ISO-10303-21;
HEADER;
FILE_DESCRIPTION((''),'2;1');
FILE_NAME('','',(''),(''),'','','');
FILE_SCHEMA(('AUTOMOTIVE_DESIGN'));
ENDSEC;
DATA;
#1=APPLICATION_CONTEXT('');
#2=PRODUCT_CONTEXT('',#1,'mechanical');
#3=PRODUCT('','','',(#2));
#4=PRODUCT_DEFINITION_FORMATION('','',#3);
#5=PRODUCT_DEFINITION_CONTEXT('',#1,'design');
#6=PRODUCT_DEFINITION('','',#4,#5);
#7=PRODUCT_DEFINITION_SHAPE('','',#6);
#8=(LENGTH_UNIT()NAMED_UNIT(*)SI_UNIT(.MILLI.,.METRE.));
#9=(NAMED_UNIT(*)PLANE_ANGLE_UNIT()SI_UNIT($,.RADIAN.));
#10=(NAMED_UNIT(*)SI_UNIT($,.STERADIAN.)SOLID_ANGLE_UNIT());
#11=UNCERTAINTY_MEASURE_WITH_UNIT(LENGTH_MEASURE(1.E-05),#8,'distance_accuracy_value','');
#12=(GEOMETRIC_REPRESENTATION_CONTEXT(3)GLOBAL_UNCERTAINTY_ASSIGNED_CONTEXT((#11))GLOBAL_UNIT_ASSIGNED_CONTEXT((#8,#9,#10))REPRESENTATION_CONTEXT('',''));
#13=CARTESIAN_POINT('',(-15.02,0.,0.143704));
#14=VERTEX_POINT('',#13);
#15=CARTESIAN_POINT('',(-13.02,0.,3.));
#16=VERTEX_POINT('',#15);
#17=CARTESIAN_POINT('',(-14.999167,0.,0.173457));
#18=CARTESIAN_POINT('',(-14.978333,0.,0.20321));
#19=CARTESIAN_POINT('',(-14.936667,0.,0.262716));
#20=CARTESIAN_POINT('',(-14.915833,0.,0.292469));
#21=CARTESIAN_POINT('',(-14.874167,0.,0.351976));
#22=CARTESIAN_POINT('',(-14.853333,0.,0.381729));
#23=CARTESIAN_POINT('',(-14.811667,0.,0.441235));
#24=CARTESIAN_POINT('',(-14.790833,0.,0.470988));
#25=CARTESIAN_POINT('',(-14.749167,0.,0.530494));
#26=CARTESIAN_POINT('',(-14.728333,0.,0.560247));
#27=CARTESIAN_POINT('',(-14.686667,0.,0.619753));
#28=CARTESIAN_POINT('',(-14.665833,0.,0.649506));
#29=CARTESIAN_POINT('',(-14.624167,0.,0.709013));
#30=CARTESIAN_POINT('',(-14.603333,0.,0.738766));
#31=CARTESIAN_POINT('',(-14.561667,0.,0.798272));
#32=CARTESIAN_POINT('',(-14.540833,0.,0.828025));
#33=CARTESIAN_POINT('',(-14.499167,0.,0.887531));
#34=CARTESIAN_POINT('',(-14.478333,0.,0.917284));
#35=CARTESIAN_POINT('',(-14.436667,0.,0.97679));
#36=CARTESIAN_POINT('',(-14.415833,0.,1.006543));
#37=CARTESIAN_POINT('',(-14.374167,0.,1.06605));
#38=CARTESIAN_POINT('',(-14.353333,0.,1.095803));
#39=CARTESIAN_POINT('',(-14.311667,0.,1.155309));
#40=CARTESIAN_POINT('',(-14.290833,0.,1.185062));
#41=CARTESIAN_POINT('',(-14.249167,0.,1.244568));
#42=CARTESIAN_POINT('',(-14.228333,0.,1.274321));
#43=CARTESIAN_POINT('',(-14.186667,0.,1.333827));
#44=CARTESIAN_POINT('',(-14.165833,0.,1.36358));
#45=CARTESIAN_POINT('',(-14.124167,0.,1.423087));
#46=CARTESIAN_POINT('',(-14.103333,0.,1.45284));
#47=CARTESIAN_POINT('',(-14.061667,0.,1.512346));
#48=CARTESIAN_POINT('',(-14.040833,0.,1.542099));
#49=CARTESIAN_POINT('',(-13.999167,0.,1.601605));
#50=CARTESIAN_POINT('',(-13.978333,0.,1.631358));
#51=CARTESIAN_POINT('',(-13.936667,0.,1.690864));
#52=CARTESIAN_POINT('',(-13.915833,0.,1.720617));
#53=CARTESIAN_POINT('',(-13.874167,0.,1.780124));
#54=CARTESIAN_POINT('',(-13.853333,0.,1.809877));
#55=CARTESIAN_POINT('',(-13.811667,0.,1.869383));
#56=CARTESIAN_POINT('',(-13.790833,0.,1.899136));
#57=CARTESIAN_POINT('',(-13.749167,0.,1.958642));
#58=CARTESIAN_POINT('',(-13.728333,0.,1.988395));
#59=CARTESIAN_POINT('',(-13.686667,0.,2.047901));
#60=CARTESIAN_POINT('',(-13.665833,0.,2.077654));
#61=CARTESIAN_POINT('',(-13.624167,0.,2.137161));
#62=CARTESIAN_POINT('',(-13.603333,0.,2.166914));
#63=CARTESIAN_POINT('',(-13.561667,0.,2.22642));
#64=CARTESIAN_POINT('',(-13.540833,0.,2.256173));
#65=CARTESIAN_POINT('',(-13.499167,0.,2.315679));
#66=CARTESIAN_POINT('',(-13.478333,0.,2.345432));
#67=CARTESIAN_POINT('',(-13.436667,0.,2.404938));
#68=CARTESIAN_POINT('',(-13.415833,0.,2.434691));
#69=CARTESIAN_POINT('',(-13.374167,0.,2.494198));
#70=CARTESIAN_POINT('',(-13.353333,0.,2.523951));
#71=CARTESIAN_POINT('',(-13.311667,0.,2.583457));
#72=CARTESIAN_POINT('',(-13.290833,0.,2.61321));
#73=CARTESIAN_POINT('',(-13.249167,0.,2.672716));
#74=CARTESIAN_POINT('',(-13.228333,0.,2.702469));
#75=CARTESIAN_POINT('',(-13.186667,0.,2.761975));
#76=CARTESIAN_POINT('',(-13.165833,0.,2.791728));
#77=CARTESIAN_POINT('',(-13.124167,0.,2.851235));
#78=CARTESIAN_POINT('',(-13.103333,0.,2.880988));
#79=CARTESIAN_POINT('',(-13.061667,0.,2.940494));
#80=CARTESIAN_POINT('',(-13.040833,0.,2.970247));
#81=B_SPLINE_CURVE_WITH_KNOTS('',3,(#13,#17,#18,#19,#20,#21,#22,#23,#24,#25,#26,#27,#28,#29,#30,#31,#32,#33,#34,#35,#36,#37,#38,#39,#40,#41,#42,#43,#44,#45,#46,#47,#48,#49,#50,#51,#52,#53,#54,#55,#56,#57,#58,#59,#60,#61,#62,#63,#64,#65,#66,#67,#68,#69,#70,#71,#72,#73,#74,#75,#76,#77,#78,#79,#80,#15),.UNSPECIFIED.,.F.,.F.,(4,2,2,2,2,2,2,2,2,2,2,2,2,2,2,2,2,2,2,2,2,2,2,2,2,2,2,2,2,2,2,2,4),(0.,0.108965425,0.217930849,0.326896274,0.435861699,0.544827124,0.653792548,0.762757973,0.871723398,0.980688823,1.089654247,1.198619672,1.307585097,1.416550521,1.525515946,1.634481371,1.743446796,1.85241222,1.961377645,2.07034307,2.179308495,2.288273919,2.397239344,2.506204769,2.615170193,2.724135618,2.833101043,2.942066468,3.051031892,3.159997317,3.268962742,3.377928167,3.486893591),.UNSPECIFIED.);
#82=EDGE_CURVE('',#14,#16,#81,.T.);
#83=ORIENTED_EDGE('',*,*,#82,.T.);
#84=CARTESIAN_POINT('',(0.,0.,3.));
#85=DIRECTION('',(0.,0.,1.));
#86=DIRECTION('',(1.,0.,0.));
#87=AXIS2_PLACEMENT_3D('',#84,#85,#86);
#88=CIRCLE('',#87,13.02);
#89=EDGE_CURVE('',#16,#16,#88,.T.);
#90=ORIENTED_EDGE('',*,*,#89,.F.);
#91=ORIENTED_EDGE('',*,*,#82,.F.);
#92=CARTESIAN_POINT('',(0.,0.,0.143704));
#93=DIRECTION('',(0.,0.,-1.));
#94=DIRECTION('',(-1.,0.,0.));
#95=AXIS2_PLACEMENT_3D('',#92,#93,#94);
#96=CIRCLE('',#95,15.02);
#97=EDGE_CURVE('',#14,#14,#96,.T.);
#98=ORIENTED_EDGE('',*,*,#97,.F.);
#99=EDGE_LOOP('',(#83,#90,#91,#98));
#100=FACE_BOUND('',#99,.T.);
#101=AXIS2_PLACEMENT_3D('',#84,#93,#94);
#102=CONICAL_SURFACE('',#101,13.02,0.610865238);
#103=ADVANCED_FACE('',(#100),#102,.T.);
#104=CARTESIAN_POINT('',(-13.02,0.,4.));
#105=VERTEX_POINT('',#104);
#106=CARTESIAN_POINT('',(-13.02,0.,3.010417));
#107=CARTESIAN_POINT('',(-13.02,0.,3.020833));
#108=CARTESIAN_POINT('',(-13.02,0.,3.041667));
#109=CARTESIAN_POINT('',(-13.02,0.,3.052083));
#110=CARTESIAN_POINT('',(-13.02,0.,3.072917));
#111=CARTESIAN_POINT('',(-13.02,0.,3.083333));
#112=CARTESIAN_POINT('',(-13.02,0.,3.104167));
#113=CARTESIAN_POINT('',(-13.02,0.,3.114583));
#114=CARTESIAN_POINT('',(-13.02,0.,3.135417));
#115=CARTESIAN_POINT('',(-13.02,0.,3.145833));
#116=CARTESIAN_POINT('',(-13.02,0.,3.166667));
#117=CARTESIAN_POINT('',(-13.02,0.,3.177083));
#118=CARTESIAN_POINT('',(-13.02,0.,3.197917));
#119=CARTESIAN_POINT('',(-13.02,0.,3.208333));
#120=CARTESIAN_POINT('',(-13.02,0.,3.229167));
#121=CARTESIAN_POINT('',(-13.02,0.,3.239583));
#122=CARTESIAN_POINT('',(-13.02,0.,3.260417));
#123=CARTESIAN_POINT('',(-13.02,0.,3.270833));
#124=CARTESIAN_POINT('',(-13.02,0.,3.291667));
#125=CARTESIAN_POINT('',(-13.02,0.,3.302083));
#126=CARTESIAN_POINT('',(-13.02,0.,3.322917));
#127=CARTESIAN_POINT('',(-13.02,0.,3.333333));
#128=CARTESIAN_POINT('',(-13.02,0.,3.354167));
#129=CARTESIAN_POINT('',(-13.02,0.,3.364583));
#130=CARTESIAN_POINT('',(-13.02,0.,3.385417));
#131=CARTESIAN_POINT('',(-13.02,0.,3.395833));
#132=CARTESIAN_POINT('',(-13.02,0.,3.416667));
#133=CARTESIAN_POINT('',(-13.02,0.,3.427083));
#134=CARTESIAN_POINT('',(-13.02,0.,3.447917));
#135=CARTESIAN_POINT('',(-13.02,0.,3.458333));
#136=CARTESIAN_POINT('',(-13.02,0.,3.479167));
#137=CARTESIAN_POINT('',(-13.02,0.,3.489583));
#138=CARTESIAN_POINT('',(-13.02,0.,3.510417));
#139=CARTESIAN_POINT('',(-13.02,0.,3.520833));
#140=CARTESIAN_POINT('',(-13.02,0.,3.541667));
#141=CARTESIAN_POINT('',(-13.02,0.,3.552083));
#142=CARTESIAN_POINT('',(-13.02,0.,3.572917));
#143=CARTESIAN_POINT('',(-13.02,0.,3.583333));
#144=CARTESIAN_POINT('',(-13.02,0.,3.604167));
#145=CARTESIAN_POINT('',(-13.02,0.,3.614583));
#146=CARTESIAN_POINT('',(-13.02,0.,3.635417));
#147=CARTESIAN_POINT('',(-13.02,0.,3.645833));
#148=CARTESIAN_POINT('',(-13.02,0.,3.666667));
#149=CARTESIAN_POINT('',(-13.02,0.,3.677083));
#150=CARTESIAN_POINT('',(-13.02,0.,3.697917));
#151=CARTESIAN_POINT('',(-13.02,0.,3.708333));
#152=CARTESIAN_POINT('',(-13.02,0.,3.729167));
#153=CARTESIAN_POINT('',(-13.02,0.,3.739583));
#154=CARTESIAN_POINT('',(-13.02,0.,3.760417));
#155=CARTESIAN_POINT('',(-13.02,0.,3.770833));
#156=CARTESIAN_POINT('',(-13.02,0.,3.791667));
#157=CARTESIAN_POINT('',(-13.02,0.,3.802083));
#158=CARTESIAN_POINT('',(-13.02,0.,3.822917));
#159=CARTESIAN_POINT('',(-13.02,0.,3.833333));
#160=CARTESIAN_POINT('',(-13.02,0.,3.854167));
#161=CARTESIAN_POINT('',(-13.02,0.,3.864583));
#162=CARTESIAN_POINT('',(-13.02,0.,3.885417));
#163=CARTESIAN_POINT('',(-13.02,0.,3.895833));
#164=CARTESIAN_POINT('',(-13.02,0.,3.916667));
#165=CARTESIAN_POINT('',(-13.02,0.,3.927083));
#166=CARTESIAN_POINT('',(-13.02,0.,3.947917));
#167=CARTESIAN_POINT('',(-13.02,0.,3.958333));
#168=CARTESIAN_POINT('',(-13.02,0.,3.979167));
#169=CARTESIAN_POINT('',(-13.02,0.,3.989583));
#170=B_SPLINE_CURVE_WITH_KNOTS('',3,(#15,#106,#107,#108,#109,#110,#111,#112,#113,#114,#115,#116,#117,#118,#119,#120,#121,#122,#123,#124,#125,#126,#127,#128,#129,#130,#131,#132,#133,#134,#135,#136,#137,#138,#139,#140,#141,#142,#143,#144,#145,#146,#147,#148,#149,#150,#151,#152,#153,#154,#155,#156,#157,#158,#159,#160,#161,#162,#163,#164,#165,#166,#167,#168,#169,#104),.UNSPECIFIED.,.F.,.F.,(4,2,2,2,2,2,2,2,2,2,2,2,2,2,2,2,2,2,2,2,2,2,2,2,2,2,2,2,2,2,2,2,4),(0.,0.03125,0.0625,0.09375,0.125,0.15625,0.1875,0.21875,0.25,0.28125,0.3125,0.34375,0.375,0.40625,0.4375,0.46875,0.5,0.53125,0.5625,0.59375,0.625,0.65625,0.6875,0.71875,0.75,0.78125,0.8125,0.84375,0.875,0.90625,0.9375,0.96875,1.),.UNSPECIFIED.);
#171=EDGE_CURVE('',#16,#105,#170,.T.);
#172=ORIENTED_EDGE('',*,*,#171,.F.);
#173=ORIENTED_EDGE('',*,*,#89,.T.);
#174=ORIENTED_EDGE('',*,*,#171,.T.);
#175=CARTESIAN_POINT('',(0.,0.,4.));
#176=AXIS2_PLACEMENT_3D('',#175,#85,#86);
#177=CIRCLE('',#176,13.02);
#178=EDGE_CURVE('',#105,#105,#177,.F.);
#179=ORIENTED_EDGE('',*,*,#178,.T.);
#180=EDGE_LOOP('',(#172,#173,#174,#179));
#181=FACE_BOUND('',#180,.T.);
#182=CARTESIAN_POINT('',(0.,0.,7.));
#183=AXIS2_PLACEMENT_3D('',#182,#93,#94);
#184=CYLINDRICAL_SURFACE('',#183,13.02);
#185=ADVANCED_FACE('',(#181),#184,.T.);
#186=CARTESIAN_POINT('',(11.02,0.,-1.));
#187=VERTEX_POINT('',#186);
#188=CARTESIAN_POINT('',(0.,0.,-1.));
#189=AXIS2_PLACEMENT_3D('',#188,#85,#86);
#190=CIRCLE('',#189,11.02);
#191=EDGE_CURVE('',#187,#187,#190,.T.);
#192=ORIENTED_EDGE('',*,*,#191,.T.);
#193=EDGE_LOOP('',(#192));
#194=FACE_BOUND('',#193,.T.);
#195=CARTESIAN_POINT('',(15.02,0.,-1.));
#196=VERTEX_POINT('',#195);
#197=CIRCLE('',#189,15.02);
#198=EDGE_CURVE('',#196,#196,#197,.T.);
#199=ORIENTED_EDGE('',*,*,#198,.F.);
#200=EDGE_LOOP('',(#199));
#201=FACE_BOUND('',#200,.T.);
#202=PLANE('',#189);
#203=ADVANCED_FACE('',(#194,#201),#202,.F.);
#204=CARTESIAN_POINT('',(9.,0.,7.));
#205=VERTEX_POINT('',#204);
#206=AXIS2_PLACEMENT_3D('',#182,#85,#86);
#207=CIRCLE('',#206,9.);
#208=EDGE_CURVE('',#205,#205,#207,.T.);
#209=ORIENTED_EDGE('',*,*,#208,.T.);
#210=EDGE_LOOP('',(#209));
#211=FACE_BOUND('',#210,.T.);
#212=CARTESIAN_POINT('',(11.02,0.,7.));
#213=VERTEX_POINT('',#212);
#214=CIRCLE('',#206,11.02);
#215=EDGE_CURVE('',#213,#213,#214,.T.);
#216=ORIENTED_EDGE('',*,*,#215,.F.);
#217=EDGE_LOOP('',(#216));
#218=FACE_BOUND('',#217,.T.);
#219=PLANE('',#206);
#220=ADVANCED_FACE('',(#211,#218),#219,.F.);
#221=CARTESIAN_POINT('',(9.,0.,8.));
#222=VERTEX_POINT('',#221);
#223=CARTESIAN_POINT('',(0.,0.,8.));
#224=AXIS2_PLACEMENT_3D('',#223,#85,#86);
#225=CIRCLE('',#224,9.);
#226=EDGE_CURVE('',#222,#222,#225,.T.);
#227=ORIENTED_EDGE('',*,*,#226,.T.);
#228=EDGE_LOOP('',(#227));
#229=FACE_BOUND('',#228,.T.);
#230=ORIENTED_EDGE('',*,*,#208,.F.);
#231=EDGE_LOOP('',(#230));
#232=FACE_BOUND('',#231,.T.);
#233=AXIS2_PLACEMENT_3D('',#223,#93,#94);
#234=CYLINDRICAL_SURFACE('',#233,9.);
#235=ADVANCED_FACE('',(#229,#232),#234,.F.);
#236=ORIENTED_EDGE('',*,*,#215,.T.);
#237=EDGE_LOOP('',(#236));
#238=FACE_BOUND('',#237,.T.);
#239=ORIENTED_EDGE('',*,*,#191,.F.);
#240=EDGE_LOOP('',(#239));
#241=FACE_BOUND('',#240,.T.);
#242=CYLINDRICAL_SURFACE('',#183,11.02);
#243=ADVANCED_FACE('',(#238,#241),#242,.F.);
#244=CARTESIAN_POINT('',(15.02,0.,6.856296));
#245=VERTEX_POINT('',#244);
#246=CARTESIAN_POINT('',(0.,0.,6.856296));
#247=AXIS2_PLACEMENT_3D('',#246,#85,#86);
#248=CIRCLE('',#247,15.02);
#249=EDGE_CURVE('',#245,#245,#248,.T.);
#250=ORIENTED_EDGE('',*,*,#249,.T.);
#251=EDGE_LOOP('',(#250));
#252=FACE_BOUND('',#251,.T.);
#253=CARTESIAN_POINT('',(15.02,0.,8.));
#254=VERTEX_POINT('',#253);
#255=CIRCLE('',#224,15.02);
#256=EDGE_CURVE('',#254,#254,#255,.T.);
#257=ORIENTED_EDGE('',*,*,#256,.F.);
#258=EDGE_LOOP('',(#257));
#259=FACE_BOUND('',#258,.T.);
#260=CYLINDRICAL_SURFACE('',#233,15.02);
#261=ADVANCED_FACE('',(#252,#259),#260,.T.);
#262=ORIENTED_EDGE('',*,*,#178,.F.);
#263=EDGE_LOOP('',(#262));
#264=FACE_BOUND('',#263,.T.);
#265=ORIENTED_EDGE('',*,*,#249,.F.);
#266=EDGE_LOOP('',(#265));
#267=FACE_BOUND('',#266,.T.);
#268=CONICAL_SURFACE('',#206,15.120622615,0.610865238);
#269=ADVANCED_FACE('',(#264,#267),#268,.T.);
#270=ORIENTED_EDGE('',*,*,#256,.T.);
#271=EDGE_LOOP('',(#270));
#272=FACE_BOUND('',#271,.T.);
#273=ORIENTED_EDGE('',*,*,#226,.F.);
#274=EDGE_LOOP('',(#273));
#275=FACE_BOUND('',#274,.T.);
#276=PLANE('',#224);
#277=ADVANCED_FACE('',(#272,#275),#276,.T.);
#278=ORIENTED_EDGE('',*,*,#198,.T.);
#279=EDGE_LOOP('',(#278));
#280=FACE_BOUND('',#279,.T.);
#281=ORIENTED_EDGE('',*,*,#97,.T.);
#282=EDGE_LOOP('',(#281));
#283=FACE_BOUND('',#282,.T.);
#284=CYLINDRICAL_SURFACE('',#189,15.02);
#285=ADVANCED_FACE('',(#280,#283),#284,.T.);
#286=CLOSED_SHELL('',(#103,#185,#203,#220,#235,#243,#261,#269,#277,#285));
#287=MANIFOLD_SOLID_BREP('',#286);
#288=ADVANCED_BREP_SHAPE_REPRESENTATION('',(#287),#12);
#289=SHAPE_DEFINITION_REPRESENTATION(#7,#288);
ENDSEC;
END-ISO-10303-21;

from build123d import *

# Parameters (mm, degrees)
SKETCH2_R               = 13.02
SKETCH2_R_2             = 11.02
BOSS_EXTRUDE1_DEPTH     = 7
SKETCH3_R               = 15.02
SKETCH3_R_2             = 13.02
SKETCH3_R_3             = 11.02
SKETCH3_R_4             = 9
BOSS_EXTRUDE2_DEPTH     = 1
SALIENTE_EXTRUIR1_START = -8
SKETCH3_2_R             = 15.02
SKETCH3_2_R_2           = 13.02
SKETCH3_2_R_3           = 11.02
SALIENTE_EXTRUIR1_DEPTH = 1
CHAFL_N1_SIZE           = 3
CHAFL_N1_SIZE_2         = 2.100622615
CHAMFER1_SIZE           = 3
CHAMFER1_SIZE_2         = 2.100622615


with BuildPart() as part:
    # Sketch2 → Boss-Extrude1 (new body)
    with BuildSketch(Plane.XY):
        Circle(SKETCH2_R)
        Circle(SKETCH2_R_2, mode=Mode.SUBTRACT)
    extrude(amount=BOSS_EXTRUDE1_DEPTH)

    # Sketch3 → Boss-Extrude2 (add)
    # profile 1 of 3: a face of its own
    with BuildSketch(Plane.XY.offset(7)):
        Circle(SKETCH3_R)
        Circle(SKETCH3_R_2, mode=Mode.SUBTRACT)
    # profile 2 of 3: a face of its own
    with BuildSketch(Plane.XY.offset(7)):
        Circle(SKETCH3_R_2)
        Circle(SKETCH3_R_3, mode=Mode.SUBTRACT)
    # profile 3 of 3: a face of its own
    with BuildSketch(Plane.XY.offset(7)):
        Circle(SKETCH3_R_3)
        Circle(SKETCH3_R_4, mode=Mode.SUBTRACT)
    extrude(amount=BOSS_EXTRUDE2_DEPTH)

    # Sketch3<2> → Saliente-Extruir1 (add)
    # profile 1 of 2: a face of its own
    with BuildSketch(Plane.XY.offset(7).offset(SALIENTE_EXTRUIR1_START)):
        Circle(SKETCH3_2_R)
        Circle(SKETCH3_2_R_2, mode=Mode.SUBTRACT)
    # profile 2 of 2: a face of its own
    with BuildSketch(Plane.XY.offset(7).offset(SALIENTE_EXTRUIR1_START)):
        Circle(SKETCH3_2_R_2)
        Circle(SKETCH3_2_R_3, mode=Mode.SUBTRACT)
    extrude(amount=SALIENTE_EXTRUIR1_DEPTH)

    # Chaflán1
    # the kernel refuses this chamfer: 3, 2.100622615 mm, written as the material it adds along each edge
    with BuildSketch(Plane(origin=(0, 0, 7), x_dir=(1, 0, 0), z_dir=(0, -1, 0))) as chafl_n1_piece_1_section:
        Polygon((13.02, -CHAFL_N1_SIZE), (13.02 + CHAFL_N1_SIZE_2, 0), (13.02, 0), align=None)
    chafl_n1_piece_1 = revolve(axis=Axis((0, 0, 7), (0, 0, 1)), mode=Mode.PRIVATE)
    chafl_n1_piece_1 = chafl_n1_piece_1 & Plane(origin=(0, 0, 5.417457175), x_dir=(1, 0, 0), z_dir=(0, 0, -1)) * Cylinder(15.02, 61, mode=Mode.PRIVATE)
    add(chafl_n1_piece_1)

    # Chamfer1
    # the kernel refuses this chamfer: 3, 2.100622615 mm, written as the material it adds along each edge
    with BuildSketch(Plane(origin=(0, 0, 0), x_dir=(1, 0, 0), z_dir=(0, -1, 0))) as chamfer1_piece_1_section:
        Polygon((13.02, CHAMFER1_SIZE), (13.02 + CHAMFER1_SIZE_2, 0), (13.02, 0), align=None)
    chamfer1_piece_1 = revolve(axis=Axis((0, 0, 0), (0, 0, 1)), mode=Mode.PRIVATE)
    chamfer1_piece_1 = chamfer1_piece_1 & Plane(origin=(0, 0, 1.582542825), x_dir=(1, 0, 0), z_dir=(0, 0, -1)) * Cylinder(15.02, 61, mode=Mode.PRIVATE)
    add(chamfer1_piece_1)


solid = part.part
